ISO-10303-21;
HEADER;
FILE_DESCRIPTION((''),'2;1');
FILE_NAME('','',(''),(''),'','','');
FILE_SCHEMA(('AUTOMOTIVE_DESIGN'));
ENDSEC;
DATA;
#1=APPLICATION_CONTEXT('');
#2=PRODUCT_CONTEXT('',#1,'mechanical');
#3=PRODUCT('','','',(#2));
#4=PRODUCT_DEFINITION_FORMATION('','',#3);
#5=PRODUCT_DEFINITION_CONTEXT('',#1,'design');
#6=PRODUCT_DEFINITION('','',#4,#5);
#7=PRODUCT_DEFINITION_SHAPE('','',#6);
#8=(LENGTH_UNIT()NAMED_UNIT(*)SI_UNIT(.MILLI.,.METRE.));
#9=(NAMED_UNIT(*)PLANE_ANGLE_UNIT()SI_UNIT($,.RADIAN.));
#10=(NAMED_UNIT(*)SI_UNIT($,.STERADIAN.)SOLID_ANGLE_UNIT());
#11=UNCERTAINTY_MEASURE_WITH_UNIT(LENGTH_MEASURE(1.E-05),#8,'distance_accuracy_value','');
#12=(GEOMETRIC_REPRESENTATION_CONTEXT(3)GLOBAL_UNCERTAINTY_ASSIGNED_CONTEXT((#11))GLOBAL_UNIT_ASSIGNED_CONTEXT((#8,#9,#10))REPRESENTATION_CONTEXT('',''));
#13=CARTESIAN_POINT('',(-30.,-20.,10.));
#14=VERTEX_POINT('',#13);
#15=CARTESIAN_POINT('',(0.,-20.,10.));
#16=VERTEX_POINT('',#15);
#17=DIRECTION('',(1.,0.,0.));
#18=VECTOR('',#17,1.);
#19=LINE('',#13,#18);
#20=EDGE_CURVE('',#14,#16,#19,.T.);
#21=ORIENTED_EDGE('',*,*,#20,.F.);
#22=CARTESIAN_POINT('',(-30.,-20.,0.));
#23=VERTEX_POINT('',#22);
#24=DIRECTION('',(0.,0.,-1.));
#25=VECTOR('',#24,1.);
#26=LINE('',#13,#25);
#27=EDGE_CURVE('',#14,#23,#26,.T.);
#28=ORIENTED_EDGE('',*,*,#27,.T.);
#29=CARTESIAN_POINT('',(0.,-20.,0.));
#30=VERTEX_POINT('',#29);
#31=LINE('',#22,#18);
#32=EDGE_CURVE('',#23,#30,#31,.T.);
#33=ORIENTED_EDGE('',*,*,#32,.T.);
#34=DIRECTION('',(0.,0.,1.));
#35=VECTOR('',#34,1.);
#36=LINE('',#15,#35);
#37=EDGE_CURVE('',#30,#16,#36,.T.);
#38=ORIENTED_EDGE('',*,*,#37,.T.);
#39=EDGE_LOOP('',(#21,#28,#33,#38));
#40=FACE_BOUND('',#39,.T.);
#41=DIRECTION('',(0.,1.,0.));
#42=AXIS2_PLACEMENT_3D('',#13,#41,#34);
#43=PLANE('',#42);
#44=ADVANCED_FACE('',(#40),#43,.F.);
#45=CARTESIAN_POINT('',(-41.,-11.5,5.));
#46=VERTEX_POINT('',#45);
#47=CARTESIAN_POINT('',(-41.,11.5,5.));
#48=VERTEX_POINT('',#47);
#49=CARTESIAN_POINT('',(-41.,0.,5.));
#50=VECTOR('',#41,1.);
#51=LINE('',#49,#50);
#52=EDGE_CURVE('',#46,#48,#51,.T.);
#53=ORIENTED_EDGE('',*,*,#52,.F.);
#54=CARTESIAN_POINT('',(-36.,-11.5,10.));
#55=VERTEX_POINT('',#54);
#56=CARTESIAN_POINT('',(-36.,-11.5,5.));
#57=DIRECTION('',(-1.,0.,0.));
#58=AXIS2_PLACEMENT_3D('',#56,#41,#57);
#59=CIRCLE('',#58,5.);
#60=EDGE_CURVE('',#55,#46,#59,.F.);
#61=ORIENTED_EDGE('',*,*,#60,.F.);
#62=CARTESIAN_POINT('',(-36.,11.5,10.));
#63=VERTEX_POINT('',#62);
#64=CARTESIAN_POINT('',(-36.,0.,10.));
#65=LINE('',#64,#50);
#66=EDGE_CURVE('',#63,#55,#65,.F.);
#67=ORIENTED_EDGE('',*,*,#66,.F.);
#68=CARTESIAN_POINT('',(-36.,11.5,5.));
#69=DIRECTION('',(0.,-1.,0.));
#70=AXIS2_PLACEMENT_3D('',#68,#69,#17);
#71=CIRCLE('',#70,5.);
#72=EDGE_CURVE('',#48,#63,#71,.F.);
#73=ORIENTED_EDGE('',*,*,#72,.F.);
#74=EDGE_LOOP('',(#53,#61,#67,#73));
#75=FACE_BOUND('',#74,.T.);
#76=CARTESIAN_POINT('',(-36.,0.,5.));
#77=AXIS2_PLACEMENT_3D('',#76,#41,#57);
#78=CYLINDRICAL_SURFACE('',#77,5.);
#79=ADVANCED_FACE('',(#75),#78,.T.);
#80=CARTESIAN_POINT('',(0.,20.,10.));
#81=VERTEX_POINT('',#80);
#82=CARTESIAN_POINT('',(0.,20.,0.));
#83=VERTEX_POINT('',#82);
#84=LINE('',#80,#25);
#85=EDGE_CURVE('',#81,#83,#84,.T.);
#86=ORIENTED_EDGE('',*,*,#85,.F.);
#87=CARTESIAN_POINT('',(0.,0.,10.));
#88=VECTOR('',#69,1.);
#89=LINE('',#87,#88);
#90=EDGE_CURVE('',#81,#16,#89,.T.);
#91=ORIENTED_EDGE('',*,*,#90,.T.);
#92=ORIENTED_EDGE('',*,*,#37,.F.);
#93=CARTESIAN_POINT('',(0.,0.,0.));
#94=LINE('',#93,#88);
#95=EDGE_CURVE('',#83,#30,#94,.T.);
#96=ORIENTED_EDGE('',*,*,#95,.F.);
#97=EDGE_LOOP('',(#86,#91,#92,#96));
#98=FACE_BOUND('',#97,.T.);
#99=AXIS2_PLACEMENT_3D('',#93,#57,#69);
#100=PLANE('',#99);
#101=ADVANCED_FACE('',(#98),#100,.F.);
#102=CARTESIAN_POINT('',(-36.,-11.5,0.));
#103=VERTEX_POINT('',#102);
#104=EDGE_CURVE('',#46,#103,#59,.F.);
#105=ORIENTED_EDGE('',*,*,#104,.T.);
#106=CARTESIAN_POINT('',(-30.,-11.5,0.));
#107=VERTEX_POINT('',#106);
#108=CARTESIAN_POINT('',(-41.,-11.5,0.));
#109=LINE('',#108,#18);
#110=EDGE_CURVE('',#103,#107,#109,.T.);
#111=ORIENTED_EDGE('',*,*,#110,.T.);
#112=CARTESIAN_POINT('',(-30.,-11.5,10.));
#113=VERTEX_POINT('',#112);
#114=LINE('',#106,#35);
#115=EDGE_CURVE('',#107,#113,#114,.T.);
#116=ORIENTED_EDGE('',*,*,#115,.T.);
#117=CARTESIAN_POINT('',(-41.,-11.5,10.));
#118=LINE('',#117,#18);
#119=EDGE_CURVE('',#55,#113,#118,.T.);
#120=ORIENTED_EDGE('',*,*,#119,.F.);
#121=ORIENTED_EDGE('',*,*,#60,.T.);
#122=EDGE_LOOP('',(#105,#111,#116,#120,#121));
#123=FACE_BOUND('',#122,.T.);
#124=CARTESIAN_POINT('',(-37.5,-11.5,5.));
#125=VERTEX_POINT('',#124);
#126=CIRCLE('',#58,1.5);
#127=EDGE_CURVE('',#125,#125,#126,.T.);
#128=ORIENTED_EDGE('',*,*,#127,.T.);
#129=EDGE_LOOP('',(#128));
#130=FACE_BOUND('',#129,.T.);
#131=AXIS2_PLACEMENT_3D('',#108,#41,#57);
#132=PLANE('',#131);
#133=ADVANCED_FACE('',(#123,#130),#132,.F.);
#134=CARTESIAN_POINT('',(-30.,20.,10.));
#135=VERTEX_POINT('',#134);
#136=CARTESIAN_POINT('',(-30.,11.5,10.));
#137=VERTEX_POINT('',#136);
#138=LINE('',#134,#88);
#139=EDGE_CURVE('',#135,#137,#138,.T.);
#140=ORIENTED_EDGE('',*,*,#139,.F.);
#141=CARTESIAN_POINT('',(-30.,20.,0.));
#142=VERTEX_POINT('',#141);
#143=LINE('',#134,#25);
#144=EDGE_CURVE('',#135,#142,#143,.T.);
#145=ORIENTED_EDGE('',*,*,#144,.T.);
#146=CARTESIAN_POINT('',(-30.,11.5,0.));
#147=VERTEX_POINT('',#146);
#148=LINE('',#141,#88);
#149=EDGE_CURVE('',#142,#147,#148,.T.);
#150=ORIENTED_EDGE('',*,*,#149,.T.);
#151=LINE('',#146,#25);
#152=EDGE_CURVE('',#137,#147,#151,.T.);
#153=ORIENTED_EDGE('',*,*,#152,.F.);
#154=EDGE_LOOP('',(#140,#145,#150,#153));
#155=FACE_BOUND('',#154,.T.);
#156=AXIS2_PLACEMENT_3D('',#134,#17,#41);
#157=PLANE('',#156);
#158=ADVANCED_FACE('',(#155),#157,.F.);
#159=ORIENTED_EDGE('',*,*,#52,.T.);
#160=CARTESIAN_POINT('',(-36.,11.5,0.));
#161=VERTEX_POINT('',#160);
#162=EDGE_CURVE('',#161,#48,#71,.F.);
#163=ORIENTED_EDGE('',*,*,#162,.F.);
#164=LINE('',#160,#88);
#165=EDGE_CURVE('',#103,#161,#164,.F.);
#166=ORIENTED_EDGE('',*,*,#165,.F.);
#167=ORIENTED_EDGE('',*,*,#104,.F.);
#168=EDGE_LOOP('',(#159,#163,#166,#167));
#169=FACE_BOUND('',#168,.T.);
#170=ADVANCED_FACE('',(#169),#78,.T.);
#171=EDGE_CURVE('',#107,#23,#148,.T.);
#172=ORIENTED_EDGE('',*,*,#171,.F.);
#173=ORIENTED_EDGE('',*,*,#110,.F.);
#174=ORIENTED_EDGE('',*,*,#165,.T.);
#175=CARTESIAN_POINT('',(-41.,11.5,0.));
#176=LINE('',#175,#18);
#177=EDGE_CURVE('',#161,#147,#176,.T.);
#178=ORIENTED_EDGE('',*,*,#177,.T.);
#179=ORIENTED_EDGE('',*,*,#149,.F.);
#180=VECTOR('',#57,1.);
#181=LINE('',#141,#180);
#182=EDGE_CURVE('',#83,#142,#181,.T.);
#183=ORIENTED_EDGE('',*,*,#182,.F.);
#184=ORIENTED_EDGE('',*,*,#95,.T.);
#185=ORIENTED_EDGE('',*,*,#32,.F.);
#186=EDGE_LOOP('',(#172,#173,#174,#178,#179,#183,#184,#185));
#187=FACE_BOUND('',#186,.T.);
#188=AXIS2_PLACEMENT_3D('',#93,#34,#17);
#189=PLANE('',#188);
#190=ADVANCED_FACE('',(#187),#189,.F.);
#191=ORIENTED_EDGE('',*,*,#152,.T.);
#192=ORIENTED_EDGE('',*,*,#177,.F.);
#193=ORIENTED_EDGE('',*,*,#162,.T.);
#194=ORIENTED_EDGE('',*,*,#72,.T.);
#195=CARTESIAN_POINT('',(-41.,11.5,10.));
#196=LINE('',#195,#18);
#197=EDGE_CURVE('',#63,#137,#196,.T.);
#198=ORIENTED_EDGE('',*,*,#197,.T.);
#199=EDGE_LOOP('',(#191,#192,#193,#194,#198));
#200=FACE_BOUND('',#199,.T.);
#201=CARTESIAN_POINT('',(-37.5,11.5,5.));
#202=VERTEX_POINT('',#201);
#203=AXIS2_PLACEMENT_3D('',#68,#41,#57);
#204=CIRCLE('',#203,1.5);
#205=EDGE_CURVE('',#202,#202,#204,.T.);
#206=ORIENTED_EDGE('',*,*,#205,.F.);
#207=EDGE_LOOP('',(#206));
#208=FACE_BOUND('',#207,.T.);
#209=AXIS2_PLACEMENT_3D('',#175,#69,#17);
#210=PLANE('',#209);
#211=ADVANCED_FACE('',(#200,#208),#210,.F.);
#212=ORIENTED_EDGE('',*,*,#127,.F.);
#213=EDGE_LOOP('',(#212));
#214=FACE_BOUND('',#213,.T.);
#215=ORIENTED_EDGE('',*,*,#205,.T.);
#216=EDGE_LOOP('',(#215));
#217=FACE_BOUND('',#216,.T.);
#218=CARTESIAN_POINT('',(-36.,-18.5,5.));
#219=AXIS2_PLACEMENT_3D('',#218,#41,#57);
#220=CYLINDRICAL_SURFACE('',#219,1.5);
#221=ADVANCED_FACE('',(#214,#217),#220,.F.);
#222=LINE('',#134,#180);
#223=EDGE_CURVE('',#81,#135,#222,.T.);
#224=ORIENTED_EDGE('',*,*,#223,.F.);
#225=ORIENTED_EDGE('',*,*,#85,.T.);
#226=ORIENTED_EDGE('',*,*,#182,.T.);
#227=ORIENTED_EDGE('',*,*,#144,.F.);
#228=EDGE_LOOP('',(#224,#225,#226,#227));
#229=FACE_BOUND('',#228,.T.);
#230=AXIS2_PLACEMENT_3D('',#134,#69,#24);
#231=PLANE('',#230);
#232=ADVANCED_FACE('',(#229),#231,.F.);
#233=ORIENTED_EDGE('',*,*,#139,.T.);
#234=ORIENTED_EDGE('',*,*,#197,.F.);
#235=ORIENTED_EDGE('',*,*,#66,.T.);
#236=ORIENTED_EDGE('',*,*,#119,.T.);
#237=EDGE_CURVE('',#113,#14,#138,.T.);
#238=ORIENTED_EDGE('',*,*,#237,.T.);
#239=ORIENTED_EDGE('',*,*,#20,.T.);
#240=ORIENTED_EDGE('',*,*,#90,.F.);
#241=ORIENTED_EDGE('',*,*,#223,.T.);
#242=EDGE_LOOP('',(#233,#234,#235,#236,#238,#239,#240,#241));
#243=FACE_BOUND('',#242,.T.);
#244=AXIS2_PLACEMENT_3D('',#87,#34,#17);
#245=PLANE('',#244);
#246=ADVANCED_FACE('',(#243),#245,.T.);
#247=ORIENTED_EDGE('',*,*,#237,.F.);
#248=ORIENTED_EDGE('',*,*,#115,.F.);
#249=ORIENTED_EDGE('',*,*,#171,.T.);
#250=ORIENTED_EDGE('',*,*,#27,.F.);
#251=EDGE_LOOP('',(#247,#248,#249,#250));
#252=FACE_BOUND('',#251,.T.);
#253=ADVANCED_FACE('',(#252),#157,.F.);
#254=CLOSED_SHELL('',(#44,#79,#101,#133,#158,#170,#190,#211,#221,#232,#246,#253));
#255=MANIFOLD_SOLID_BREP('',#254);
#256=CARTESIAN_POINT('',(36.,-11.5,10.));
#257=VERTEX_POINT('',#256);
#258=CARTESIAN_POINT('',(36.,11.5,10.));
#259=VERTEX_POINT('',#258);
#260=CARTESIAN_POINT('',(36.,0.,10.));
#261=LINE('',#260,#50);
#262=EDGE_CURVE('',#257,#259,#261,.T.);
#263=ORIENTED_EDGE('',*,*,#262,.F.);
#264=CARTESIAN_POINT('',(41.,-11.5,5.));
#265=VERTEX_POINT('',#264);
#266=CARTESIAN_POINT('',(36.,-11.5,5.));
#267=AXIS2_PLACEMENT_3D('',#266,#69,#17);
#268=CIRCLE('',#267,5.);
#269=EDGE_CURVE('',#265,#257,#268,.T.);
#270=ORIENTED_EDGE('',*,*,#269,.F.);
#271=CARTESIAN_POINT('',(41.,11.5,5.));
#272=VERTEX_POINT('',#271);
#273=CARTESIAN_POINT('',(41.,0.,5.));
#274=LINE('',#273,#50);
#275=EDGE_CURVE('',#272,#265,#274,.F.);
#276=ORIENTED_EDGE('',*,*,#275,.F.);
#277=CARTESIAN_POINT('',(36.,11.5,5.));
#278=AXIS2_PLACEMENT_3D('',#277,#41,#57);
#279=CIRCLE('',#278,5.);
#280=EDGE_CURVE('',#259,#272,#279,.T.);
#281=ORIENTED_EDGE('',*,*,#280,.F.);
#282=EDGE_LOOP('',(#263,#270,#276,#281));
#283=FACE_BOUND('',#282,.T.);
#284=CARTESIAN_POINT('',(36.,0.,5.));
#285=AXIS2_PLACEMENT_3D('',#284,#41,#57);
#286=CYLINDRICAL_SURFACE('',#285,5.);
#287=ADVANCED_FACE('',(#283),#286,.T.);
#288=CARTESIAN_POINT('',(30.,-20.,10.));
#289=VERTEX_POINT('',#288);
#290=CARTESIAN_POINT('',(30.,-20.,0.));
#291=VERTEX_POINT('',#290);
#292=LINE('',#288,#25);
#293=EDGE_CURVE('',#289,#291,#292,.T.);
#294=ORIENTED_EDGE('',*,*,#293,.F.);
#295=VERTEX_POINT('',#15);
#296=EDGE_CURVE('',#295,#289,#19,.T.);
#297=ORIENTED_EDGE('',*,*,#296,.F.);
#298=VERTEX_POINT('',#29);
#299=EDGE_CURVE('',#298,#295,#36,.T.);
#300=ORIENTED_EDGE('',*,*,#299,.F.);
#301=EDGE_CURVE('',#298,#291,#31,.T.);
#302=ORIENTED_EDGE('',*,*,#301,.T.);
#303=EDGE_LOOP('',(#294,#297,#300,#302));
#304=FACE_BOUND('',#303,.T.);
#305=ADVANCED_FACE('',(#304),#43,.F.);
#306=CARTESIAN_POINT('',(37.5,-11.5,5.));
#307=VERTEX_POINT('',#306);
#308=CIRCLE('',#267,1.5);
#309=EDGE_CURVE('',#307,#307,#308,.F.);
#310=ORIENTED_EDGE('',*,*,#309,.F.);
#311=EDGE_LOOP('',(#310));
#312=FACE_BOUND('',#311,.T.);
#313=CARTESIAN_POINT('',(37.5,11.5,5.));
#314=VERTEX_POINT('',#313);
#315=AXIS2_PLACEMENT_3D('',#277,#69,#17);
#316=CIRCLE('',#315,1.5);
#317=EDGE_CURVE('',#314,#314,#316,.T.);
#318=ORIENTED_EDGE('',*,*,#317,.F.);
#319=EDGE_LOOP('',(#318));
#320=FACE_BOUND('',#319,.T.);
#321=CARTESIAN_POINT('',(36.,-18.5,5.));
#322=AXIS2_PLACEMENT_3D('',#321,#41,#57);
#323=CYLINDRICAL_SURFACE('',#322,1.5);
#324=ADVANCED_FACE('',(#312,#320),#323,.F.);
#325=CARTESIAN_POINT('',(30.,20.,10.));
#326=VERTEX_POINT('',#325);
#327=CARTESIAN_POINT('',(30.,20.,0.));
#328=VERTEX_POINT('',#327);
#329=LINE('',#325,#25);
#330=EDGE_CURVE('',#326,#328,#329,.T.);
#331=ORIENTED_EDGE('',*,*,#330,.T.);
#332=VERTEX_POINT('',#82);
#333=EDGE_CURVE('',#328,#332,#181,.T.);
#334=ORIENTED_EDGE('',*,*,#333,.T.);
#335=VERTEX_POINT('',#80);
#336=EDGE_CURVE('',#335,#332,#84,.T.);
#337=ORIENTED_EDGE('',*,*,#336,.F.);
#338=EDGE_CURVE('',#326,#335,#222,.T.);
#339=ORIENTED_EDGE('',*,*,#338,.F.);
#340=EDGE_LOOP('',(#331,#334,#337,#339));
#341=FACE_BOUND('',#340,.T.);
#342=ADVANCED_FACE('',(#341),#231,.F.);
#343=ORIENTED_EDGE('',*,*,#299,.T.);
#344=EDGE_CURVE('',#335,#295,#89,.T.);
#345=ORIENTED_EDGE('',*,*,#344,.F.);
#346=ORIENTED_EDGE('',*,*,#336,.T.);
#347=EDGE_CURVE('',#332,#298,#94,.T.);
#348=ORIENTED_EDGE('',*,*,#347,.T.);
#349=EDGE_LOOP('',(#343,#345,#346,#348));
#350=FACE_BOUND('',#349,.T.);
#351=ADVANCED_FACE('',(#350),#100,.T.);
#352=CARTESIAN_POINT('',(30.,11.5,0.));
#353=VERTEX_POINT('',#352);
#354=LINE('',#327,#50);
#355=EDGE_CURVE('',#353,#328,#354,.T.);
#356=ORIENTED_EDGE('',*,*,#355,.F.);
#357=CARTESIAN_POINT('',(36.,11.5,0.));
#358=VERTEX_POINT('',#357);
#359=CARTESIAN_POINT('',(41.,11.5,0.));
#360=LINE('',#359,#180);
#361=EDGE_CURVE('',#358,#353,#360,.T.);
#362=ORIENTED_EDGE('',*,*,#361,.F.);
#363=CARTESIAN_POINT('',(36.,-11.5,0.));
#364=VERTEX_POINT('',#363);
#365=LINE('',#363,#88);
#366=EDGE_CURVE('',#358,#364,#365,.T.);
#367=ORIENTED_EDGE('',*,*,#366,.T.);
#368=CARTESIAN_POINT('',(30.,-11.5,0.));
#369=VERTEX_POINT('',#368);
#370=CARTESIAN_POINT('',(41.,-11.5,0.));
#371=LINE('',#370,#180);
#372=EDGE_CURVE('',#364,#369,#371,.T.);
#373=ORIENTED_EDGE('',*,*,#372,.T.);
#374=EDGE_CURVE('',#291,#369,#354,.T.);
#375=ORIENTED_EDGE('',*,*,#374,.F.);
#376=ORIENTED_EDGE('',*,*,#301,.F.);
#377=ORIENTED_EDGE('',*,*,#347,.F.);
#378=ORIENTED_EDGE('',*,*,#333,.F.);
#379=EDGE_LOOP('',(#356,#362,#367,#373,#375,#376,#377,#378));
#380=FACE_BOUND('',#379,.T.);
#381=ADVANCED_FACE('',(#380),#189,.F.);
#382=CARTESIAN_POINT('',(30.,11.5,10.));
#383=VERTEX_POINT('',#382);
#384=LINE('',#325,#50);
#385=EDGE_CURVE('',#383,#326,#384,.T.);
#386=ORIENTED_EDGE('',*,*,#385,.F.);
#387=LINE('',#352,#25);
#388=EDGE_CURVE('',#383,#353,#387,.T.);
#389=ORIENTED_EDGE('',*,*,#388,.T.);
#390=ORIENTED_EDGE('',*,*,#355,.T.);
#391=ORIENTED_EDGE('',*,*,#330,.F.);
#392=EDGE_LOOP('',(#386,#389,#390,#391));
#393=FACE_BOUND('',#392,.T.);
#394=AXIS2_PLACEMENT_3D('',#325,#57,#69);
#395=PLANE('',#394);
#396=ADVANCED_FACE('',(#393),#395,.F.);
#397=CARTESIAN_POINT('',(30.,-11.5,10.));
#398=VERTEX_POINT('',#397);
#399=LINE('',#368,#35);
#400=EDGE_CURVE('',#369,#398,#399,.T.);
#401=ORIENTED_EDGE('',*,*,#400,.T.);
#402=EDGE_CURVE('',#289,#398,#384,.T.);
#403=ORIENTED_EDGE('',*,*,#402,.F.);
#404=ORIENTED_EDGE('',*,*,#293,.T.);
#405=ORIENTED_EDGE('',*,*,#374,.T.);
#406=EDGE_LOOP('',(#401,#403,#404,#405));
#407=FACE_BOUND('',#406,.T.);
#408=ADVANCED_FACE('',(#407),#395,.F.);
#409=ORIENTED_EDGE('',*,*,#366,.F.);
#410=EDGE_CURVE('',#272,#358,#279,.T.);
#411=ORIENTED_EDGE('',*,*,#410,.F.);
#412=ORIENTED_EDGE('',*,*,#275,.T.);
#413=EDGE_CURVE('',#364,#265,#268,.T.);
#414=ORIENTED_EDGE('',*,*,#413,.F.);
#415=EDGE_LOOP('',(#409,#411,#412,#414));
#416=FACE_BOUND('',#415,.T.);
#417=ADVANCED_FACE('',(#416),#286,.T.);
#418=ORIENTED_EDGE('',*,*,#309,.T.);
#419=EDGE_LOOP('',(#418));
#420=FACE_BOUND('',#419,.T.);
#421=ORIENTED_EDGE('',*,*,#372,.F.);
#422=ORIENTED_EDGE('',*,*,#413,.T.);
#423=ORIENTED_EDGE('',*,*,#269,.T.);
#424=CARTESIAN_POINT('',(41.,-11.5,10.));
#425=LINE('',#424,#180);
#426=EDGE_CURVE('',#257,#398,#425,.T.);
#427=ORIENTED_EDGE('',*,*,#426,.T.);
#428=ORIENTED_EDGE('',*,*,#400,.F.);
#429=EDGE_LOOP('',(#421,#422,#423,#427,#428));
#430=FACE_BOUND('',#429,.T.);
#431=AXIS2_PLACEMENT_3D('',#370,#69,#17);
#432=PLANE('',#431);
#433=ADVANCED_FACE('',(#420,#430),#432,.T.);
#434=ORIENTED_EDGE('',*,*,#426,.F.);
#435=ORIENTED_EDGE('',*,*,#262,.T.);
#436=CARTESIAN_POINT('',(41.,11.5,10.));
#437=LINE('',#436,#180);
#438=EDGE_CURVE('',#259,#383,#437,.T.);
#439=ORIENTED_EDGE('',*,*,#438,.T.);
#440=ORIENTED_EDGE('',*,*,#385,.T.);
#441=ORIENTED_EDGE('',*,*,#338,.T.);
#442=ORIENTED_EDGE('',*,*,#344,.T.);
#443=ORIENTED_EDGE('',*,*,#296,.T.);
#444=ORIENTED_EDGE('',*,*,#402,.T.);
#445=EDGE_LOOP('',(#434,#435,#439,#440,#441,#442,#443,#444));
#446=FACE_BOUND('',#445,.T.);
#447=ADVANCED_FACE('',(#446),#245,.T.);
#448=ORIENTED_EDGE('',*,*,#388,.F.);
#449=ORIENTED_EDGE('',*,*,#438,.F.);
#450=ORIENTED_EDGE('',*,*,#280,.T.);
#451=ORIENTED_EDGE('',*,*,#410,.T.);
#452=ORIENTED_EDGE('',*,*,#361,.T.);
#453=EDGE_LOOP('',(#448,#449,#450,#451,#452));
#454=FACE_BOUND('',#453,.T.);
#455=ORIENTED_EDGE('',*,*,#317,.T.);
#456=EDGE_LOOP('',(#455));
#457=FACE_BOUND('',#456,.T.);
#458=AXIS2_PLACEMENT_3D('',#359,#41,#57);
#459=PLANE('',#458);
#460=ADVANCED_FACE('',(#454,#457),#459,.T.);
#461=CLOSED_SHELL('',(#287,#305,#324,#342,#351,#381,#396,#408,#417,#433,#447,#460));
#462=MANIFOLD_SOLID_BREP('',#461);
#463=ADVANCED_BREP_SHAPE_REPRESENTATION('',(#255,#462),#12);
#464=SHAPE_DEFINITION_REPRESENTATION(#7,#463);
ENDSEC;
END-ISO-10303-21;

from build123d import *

# Parameters (mm, degrees)
SKETCH_1_W          = 60
SKETCH_1_H          = 40
EXTRUDE_1_DEPTH     = 10
SKETCH_2_W          = 10
SKETCH_2_H          = 23
EXTRUDE_2_DEPTH     = 11
SKETCH_3_R          = 1.5
CUT_EXTRUDE_1_DEPTH = 30
FILLET_1_R          = 5


with BuildPart() as part:
    # 草图1 → 凸台-拉伸1 (new body)
    with BuildSketch(Plane.XY):
        Rectangle(SKETCH_1_W, SKETCH_1_H)
    extrude(amount=EXTRUDE_1_DEPTH)

    # 草图2 → 凸台-拉伸2 (add)
    with BuildSketch(Plane.ZY.offset(30)):
        with Locations((5, 0)):
            Rectangle(SKETCH_2_W, SKETCH_2_H)
    extrude_2 = extrude(amount=EXTRUDE_2_DEPTH)

    # 草图3 → 切除-拉伸1 (cut)
    with BuildSketch(Plane(origin=(0, 11.5, 0), x_dir=(1, 0, 0), z_dir=(0, 1, 0))):
        with Locations(Location((-36, -5, 0), (0, 0, 180))):
            Circle(SKETCH_3_R)
    cut_extrude_1 = extrude(amount=-CUT_EXTRUDE_1_DEPTH, mode=Mode.SUBTRACT)

    # 镜向1: 凸台-拉伸2, 切除-拉伸1 across plane
    add(extrude_2.mirror(Plane(origin=(0, 0, 0), x_dir=(0, 0, 1), z_dir=(1, 0, 0))))
    add(cut_extrude_1.mirror(Plane(origin=(0, 0, 0), x_dir=(0, 0, 1), z_dir=(1, 0, 0))), mode=Mode.SUBTRACT)

    # 圆角1
    fillet_1_edges = [part.edges().sort_by_distance(p)[0] for p in [
        (41, 0, 0),
        (41, 0, 10),
        (-41, 0, 0),
        (-41, 0, 10),
    ]]
    fillet(fillet_1_edges, radius=FILLET_1_R - 0.0001)  # a hair under: the kernel refuses the full size


with BuildPart() as body_2:
    # Split Bodies 1: the piece on the far side of the plane
    add(part.part)
    split(bisect_by=Plane(origin=(0, 0, 0), x_dir=(0, -1, 0), z_dir=(-1, 0, 0)), keep=Keep.BOTTOM)


with BuildPart() as part_1:
    add(part.part)

    # Split Bodies 1
    split(bisect_by=Plane(origin=(0, 0, 0), x_dir=(0, -1, 0), z_dir=(-1, 0, 0)), keep=Keep.TOP)


solid = Compound([body_2.part, part_1.part])
